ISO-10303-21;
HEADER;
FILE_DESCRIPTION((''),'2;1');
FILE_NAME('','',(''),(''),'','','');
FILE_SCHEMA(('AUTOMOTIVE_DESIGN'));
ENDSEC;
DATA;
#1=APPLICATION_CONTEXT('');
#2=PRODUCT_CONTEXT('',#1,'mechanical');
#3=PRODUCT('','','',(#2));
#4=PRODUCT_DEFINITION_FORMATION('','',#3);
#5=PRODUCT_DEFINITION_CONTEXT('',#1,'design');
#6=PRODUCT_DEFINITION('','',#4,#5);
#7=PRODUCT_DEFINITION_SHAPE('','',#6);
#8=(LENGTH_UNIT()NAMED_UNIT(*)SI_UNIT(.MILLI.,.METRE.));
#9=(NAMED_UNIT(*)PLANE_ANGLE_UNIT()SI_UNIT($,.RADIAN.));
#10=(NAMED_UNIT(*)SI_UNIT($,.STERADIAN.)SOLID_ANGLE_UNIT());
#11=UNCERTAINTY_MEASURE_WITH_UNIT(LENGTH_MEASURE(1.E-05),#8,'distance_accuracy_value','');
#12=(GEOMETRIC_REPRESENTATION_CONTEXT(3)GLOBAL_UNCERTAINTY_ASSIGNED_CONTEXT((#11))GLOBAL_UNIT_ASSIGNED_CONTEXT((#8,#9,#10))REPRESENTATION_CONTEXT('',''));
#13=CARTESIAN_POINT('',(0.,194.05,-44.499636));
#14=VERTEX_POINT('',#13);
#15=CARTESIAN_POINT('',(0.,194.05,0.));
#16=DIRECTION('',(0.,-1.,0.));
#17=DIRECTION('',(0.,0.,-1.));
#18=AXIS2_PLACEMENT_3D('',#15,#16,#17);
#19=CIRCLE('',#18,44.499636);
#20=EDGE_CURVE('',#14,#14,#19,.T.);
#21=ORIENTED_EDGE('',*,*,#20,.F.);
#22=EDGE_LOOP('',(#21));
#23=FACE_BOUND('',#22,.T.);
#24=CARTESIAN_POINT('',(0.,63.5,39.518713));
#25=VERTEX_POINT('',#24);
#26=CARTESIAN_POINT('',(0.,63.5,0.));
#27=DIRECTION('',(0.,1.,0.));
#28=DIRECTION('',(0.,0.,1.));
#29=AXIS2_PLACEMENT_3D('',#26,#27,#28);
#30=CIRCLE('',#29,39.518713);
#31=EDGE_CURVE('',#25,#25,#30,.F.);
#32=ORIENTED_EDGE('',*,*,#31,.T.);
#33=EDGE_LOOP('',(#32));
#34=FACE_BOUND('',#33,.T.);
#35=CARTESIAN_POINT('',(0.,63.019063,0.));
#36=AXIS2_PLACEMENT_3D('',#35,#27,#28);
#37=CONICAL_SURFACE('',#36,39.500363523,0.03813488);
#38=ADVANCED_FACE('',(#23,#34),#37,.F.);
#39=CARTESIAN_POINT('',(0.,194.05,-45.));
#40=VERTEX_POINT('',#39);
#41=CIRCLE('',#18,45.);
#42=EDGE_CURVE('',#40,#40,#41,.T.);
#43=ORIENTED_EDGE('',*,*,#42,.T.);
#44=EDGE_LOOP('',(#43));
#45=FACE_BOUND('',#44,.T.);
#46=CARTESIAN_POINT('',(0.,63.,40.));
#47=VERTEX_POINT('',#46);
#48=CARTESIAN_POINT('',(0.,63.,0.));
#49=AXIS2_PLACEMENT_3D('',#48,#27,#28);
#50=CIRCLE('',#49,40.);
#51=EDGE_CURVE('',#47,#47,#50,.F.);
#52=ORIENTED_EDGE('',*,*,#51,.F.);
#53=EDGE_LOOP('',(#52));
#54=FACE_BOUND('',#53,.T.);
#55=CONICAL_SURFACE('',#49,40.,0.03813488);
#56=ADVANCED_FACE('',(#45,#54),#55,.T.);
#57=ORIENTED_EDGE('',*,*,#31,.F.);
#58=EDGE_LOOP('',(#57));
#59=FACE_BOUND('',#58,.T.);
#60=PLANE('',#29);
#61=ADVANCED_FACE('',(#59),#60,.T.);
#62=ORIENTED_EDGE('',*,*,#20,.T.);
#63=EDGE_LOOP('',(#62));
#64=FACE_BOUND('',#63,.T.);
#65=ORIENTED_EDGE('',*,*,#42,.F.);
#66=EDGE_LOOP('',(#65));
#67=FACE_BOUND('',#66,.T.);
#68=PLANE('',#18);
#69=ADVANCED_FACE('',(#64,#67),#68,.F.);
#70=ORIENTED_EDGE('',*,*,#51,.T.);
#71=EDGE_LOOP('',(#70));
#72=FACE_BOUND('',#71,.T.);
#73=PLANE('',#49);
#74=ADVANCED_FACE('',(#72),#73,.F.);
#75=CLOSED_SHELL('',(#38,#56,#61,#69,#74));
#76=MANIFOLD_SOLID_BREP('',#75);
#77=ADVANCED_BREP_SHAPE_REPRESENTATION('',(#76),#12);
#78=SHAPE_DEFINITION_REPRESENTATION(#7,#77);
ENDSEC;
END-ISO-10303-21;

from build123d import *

# Parameters (mm, degrees)
SHELL1_T = -0.5


# Read off the part's stored shape, not the designer's step: Boundary1
with BuildPart() as part:
    # Boundary1 outline → Boundary1 (revolve)
    with BuildSketch(Plane.XY):
        Polygon((0, 63), (40, 63), (45, 194.05), (0, 194.05), align=None)
    revolve(axis=Axis((0, 0, 0), (0, 1, 0)))

    # Shell1
    shell1_openings = [part.faces().sort_by_distance(p)[0] for p in [
        (0, 194.05, 0),
    ]]
    offset(amount=SHELL1_T, openings=shell1_openings, kind=Kind.INTERSECTION)


solid = part.part
